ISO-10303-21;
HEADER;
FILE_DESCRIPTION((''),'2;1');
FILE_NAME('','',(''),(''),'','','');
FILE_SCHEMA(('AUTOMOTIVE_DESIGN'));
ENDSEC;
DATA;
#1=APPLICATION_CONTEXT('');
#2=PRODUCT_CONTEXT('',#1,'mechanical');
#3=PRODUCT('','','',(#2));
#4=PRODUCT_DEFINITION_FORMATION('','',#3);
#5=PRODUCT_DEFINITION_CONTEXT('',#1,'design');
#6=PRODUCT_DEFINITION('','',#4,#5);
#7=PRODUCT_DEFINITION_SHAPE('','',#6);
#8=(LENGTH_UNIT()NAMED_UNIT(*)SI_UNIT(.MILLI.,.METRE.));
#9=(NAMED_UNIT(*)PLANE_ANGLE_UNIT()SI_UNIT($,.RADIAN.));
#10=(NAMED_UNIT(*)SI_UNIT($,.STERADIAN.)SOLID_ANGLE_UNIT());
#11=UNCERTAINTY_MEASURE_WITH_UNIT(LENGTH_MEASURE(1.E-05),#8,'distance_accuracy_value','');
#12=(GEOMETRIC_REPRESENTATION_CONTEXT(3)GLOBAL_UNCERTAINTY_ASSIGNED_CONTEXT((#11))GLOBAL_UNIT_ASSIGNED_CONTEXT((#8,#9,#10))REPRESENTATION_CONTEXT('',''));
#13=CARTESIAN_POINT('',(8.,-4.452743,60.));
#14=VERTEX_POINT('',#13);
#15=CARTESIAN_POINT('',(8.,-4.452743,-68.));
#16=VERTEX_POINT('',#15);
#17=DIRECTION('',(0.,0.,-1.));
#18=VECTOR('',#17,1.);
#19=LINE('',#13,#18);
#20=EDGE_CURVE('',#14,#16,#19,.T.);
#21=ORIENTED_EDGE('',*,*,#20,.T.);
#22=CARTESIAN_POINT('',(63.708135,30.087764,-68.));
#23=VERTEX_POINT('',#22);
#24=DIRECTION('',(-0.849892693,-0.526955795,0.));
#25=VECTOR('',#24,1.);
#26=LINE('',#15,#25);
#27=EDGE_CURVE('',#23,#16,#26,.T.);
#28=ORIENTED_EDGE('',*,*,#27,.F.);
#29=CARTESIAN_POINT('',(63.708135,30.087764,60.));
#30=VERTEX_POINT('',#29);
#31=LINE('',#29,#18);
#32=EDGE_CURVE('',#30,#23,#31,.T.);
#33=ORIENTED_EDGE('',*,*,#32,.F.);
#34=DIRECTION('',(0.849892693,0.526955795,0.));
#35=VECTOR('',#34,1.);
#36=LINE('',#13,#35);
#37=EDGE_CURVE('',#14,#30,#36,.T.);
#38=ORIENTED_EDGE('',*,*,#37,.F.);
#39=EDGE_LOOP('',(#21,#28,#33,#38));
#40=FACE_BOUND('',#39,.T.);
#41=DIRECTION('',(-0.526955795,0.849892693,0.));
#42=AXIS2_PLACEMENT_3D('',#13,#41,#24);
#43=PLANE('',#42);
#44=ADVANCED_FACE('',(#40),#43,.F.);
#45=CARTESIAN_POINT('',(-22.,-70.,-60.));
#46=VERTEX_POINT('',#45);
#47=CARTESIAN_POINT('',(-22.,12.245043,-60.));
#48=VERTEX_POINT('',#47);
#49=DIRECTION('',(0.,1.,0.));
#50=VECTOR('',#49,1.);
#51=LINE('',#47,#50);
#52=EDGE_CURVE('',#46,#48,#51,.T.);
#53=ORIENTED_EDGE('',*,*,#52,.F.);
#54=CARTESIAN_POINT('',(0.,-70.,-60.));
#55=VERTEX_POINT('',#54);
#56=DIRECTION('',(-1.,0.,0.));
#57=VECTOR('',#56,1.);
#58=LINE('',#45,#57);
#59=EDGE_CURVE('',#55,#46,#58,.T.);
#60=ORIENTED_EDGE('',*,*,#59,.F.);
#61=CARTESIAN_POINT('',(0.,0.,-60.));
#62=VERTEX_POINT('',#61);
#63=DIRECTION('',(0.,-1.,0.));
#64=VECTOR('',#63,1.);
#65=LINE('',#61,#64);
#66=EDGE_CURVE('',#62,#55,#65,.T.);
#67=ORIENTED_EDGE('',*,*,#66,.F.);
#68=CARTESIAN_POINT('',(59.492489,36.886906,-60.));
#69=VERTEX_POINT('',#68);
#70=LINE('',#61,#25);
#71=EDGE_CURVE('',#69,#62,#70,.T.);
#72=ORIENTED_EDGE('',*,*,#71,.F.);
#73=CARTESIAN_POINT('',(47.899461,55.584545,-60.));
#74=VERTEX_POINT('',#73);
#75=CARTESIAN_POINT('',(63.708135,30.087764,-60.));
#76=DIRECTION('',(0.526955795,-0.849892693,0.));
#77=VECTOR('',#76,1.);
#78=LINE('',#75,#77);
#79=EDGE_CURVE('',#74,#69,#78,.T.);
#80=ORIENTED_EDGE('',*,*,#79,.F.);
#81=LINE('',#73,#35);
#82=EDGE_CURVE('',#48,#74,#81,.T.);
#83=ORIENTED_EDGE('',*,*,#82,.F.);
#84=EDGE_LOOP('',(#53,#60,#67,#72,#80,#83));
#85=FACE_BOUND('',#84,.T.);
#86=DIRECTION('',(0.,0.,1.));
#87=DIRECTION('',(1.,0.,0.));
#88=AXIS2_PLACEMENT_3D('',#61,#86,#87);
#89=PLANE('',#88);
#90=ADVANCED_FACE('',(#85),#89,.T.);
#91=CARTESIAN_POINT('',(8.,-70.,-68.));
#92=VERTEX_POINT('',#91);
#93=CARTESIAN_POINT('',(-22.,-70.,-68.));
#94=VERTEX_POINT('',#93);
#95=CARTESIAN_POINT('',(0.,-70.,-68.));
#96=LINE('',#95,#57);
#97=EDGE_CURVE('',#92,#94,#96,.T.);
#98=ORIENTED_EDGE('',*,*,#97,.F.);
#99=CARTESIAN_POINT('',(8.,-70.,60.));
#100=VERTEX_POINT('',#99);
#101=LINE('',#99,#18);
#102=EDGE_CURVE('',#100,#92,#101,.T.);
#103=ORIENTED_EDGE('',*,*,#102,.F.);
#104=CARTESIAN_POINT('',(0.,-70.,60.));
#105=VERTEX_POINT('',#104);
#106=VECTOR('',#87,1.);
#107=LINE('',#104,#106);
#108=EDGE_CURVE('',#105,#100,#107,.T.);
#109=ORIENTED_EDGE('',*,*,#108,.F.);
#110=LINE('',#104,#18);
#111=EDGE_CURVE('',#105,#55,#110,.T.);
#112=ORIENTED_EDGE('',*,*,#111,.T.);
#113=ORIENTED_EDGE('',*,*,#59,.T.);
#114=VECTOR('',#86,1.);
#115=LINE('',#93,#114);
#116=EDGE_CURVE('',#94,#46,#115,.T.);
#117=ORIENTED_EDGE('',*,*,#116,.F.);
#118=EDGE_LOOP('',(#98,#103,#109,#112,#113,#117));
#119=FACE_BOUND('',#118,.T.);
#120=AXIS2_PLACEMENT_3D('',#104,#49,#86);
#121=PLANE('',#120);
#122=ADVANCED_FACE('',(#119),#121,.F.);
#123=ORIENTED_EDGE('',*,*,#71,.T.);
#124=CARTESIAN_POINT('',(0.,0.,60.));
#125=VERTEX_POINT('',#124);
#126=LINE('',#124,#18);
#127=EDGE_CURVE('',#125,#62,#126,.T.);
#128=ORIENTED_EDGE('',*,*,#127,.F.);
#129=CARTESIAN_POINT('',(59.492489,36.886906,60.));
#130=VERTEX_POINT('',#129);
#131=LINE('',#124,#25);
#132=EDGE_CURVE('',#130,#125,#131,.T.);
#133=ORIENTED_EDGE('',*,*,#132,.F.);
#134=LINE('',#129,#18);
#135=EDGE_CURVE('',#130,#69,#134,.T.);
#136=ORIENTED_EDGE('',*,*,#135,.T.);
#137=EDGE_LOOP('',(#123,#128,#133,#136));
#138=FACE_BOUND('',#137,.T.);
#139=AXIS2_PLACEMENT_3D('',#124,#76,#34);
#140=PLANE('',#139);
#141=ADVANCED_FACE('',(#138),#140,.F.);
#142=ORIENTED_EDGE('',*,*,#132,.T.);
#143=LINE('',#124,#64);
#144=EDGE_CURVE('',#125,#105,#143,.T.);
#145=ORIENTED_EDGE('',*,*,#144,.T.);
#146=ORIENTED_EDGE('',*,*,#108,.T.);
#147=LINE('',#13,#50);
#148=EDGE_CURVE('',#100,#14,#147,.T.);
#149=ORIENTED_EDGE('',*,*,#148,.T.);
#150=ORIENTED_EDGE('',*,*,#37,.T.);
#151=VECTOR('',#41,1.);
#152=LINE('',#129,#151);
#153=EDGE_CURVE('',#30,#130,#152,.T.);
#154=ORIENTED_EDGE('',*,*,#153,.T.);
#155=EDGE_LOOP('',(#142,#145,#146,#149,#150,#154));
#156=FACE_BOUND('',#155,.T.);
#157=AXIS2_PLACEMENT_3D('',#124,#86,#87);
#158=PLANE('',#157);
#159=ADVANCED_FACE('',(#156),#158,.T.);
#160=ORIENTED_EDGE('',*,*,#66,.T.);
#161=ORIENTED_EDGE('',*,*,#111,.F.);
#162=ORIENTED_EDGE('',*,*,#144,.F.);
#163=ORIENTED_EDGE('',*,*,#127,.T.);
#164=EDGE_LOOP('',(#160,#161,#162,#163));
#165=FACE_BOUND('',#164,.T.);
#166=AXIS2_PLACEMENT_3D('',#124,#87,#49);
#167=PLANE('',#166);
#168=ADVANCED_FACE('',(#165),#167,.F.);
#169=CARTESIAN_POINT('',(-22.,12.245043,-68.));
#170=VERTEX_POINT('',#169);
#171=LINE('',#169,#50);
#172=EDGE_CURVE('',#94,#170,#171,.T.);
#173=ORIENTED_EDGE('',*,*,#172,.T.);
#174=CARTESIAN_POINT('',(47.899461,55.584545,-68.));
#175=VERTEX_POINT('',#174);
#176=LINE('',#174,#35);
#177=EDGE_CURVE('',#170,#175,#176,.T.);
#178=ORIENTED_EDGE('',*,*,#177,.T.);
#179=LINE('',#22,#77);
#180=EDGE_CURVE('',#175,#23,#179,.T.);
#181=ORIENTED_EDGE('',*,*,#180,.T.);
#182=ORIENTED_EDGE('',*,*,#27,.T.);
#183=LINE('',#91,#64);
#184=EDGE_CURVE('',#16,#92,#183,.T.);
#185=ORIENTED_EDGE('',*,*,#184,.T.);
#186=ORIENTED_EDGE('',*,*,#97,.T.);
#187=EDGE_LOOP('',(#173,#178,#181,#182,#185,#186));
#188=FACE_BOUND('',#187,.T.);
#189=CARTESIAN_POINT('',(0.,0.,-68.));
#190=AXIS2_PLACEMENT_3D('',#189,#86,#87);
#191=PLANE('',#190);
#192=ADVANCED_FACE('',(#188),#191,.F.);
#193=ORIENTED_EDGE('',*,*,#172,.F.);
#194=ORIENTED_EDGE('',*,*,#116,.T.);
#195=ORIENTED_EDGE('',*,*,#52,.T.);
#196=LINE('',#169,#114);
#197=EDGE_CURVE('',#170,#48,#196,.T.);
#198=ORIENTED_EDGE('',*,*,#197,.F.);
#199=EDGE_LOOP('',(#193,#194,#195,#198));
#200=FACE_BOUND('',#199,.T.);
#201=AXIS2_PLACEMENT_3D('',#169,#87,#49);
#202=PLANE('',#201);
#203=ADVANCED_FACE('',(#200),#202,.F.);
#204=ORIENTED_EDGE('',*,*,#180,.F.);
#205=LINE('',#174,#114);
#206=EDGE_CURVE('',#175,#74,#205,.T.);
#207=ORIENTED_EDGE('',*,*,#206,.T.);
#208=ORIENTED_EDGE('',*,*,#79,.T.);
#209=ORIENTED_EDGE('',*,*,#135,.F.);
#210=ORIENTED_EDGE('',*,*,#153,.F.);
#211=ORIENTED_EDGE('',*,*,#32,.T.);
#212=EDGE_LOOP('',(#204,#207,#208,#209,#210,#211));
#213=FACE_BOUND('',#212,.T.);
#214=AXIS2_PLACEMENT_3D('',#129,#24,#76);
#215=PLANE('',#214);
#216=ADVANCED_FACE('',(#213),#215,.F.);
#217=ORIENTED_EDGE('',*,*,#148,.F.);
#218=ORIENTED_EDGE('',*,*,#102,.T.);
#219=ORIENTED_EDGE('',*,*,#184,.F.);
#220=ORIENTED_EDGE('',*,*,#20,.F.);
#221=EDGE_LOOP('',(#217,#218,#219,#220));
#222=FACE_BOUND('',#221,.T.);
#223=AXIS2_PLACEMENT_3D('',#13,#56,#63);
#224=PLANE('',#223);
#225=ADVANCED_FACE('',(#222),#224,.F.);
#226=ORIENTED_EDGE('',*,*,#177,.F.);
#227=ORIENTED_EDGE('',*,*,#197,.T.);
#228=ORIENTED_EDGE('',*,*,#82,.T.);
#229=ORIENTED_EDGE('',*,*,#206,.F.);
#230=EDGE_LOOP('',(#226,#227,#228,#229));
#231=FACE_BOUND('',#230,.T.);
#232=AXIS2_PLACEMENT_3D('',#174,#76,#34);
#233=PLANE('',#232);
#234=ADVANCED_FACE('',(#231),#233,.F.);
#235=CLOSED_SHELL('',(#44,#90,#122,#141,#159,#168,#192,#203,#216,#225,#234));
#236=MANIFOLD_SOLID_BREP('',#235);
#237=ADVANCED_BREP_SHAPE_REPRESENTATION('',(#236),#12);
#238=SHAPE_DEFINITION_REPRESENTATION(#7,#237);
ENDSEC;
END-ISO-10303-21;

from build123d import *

# Parameters (mm, degrees)
BRKT_3_4_BOSS_EXTRUDE1_START = -60
BRKT_3_4_BOSS_EXTRUDE1_DEPTH = 120
BOSS_EXTRUDE1_DEPTH          = 8


# Read off the part's stored shape, not the designer's step: <BRKT_3_4>-<Boss-Extrude1>
with BuildPart() as part:
    # <BRKT_3_4>-<Boss-Extrude1> outline → <BRKT_3_4>-<Boss-Extrude1> (new body)
    with BuildSketch(Plane.XY.offset(BRKT_3_4_BOSS_EXTRUDE1_START)):
        Polygon((0, 0), (0, -70), (8, -70), (8, -4.452742878), (63.708134873, 30.087764141), (59.492488509, 36.886905685), align=None)
    extrude(amount=BRKT_3_4_BOSS_EXTRUDE1_DEPTH)

    # Sketch1 → Boss-Extrude1 (add)
    with BuildSketch(Plane(origin=(0, 0, -60), x_dir=(-1, 0, 0), z_dir=(0, 0, -1))):
        Polygon((-63.708134873, 30.087764141), (-47.899461008, 55.58454493), (22, 12.245042915), (22, -70), (0, -70), (-8, -70), (-8, -4.452742878), align=None)
    extrude(amount=BOSS_EXTRUDE1_DEPTH)


solid = part.part
